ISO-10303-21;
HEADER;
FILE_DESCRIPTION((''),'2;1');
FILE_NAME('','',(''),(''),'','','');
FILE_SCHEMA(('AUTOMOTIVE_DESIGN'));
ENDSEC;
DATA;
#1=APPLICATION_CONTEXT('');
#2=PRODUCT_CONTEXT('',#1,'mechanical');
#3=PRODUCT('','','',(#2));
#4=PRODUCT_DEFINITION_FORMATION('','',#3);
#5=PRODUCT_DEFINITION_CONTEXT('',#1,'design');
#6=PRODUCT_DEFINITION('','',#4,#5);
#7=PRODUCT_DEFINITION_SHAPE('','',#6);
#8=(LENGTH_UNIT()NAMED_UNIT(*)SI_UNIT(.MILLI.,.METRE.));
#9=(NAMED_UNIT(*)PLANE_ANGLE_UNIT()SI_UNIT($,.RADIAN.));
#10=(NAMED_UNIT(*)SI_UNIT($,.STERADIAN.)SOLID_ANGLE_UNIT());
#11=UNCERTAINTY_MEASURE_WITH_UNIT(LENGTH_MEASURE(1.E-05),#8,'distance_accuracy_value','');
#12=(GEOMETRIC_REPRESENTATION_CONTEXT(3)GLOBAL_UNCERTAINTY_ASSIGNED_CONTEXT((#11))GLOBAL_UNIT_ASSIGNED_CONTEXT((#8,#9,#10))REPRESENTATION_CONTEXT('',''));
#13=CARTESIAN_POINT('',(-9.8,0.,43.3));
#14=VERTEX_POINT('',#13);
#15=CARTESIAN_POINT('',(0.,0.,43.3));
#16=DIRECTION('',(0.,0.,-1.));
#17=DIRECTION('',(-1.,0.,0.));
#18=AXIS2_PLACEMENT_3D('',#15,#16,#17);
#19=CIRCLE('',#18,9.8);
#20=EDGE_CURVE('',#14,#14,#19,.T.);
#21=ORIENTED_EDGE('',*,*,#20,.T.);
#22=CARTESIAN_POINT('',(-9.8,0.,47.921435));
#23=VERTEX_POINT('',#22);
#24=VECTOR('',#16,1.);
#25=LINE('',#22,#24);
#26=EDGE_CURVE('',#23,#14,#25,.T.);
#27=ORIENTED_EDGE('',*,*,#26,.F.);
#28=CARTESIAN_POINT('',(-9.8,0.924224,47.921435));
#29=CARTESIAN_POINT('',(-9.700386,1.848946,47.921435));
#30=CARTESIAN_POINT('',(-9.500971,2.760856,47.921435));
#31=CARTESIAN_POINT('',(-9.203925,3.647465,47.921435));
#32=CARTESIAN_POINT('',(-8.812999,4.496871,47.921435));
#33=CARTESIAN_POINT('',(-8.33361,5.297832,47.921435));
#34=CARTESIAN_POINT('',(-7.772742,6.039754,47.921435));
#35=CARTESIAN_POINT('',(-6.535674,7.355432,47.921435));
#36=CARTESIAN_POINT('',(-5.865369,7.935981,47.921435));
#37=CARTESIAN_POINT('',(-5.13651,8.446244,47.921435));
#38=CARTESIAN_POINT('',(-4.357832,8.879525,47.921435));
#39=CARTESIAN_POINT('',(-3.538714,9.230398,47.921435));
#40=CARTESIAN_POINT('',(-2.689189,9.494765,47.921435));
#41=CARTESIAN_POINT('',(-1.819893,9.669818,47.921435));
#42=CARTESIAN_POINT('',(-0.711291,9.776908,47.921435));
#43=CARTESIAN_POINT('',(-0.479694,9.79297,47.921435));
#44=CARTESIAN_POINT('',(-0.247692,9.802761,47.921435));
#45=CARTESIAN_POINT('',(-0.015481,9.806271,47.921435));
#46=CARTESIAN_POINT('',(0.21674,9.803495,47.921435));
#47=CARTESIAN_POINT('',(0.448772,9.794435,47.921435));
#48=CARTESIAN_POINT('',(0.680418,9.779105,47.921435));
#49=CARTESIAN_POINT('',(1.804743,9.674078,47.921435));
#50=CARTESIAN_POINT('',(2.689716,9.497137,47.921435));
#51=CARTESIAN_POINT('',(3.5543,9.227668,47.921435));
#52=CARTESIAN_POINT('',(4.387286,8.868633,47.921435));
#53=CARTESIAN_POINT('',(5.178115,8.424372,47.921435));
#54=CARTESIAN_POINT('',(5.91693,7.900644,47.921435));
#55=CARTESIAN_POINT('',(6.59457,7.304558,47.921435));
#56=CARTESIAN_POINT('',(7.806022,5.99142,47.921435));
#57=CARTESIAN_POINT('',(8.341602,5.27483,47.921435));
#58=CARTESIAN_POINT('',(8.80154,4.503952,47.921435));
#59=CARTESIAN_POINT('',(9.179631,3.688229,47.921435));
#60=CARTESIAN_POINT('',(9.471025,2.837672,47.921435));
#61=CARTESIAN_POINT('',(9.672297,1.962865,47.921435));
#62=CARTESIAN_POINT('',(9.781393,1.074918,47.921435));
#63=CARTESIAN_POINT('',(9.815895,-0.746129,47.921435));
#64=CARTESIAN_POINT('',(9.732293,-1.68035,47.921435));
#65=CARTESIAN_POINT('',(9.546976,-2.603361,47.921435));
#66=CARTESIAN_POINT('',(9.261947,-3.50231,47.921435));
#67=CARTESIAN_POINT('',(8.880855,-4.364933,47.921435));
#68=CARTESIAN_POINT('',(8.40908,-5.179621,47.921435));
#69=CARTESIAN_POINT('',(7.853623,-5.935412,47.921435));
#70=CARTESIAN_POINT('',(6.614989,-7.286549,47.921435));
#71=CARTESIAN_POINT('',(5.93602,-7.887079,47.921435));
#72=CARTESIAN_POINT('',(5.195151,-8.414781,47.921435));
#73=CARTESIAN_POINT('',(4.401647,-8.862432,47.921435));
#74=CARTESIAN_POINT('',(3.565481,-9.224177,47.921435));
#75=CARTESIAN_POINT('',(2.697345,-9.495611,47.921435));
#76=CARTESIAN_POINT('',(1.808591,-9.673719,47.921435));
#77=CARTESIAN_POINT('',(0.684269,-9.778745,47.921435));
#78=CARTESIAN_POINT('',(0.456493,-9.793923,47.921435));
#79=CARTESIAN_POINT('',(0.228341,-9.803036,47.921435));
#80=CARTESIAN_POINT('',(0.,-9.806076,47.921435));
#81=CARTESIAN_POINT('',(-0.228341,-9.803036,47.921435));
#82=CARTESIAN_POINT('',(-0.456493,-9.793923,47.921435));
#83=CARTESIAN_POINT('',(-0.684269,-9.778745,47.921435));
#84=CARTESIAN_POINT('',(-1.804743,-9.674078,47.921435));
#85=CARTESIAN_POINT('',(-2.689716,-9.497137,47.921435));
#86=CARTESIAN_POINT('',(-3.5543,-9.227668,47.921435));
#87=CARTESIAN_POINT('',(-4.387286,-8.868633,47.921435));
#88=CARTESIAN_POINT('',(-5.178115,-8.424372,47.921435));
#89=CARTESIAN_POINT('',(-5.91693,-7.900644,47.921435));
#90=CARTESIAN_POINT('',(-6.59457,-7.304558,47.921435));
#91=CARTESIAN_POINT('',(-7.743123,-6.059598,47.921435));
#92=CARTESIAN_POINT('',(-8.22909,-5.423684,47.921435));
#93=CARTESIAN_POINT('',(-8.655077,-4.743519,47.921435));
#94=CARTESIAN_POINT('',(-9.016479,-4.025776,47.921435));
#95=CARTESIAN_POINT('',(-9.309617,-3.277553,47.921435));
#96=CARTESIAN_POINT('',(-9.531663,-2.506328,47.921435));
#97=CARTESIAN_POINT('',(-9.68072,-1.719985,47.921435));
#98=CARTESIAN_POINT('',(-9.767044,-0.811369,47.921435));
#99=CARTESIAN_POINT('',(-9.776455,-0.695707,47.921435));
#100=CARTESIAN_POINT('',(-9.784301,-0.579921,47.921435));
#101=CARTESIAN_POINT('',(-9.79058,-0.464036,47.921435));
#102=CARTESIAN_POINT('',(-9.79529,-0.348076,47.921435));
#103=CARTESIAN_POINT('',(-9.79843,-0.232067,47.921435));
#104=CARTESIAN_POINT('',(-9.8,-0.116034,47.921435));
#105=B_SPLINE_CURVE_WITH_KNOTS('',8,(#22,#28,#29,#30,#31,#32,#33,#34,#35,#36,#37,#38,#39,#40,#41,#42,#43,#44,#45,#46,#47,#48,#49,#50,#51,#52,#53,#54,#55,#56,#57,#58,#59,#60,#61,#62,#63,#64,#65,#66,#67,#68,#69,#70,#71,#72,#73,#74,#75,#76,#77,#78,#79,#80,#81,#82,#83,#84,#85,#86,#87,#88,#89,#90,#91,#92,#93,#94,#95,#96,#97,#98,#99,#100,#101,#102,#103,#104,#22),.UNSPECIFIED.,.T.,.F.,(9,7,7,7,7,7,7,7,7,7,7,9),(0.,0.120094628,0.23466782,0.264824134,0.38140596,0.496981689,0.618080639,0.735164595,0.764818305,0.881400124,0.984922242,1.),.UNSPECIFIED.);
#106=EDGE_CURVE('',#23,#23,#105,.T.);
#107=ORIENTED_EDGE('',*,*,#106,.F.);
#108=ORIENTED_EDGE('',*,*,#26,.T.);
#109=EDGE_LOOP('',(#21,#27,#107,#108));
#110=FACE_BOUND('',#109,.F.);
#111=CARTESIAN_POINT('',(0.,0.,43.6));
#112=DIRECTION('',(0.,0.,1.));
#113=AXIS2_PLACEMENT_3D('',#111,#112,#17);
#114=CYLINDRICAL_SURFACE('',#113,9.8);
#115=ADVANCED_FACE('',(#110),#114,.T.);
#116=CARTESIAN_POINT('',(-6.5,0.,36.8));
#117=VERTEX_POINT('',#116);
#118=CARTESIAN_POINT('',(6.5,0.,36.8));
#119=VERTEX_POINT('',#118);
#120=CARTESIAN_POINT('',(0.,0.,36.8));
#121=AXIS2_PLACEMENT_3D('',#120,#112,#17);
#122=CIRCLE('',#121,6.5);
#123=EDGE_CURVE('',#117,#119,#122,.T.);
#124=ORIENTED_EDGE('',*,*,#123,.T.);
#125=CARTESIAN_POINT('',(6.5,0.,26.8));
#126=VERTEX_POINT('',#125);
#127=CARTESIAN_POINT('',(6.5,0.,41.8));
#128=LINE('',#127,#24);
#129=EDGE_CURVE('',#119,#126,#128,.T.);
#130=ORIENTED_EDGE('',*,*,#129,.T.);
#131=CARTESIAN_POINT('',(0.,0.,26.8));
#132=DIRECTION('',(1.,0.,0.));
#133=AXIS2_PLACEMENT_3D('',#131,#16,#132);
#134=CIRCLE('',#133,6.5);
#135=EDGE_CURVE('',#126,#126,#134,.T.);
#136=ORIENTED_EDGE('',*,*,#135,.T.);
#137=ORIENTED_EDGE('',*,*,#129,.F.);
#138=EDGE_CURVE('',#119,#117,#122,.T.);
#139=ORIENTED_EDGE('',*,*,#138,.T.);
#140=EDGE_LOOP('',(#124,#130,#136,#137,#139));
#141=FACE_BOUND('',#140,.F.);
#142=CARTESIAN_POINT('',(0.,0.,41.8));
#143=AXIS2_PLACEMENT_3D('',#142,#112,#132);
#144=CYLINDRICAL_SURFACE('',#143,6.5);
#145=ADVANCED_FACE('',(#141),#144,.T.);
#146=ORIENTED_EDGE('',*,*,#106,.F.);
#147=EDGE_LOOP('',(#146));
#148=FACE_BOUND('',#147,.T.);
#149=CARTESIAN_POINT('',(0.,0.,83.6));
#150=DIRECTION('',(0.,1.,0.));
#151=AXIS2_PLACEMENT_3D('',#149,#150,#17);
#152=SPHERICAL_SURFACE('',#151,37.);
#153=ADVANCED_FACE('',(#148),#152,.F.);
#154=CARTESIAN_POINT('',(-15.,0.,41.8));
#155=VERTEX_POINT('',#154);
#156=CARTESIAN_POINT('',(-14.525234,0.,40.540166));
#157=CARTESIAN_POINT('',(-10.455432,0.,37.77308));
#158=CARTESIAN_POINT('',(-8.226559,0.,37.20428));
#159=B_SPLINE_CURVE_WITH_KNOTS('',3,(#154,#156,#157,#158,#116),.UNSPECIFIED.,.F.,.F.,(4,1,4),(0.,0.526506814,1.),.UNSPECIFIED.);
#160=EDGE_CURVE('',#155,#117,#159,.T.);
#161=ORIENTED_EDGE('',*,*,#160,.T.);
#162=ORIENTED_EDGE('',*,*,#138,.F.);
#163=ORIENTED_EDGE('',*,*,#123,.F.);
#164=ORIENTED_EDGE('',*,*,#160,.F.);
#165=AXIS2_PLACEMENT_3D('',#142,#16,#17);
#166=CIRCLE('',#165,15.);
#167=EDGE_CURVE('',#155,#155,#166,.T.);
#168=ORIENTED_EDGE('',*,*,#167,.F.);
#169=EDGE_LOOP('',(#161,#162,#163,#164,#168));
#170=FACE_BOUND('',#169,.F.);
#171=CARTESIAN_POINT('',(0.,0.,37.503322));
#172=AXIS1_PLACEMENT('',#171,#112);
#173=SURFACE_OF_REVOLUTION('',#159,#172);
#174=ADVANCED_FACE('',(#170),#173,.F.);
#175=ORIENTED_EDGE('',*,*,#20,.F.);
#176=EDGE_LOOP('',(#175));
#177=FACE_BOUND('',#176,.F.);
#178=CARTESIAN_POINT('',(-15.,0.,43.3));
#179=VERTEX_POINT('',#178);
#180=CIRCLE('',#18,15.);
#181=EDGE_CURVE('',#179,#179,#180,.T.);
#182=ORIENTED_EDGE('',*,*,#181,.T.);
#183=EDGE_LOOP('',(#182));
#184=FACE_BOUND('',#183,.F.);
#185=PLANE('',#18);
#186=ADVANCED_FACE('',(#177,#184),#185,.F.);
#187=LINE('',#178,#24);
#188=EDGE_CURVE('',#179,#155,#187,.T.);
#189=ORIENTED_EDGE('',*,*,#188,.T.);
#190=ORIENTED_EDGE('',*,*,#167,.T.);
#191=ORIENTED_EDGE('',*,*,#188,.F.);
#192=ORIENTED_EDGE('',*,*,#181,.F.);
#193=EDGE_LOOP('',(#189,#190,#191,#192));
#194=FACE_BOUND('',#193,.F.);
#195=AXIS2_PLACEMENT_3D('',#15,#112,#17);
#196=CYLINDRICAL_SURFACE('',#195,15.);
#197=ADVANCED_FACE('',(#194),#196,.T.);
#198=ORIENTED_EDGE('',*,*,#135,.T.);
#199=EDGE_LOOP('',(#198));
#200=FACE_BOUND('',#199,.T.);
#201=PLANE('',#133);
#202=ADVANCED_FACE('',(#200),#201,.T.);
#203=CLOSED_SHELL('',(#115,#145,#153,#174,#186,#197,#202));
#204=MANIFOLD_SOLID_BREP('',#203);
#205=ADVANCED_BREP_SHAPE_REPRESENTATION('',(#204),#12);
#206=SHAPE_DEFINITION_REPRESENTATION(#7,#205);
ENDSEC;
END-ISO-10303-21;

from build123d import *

# Parameters (mm, degrees)
F3_R          = 9.8
F4_DEPTH      = 10
F4_DEPTH_BACK = 0.3
F6_R          = 15
F6_R_2        = 9.8
F7_DEPTH      = 1.5
F9_ANGLE      = 180
F10_R         = 6.5
F11_DEPTH     = 15


# Not quite as in the source:
# - a feature names something its author has since deleted; it is built from what else it names


with BuildPart() as f1:
    # F0 (on Top) → F1 (revolve)
    with BuildSketch(Plane.XY):
        with BuildLine():
            Line((0, 37), (0, -37))
            ThreePointArc((0, -37), (37, 0), (0, 37))
        make_face()
    revolve(axis=Axis((0, 0, 0), (0, -1, 0)))


with BuildPart() as f4:
    # F3 (on offset) → F4 (new body, two sides)
    with BuildSketch(Plane.XY.offset(40)) as f4_sk:
        Circle(F3_R)
    extrude(amount=-F4_DEPTH)
    extrude(f4_sk.sketch, amount=F4_DEPTH_BACK)

    # F5: cut F1
    add(f1.part, mode=Mode.SUBTRACT)

    # F6 (on face) → F7 (join)
    with BuildSketch(Plane.XY.offset(40.3)):
        Circle(F6_R)
        Circle(F6_R_2, mode=Mode.SUBTRACT)
        Circle(F6_R_2)
    extrude(amount=F7_DEPTH)


with BuildPart() as f4_1:
    # F9: moved
    add(f4.part.rotate(Axis((0, 0, 41.8), (0, 1, 0)), F9_ANGLE))

    # F10 (on face) → F11 (join)
    with BuildSketch(Plane(origin=(0, 0, 41.8), x_dir=(1, 0, 0), z_dir=(0, 0, -1))):
        Circle(F10_R)
    extrude(amount=F11_DEPTH)

    # F12 (on Front) → F14 (revolve)
    with BuildSketch(Plane.XZ):
        with BuildLine():
            Line((-6.5, 36.8), (-6.5, 41.8))
            Line((-6.5, 41.8), (-15, 41.8))
            add(Edge.make_bspline(
                [(-15, 41.8), (-14.5252337679, 40.5401661992), (-10.4554320312, 37.7730797784), (-8.2265594974, 37.2042804956), (-6.5, 36.8)],
                knots=[0, 0, 0, 0, 0.5265068143, 1, 1, 1, 1], degree=3))
        make_face()
    revolve(axis=Axis((0, 0, 37.5033216551), (0, 0, 1)))


solid = f4_1.part
